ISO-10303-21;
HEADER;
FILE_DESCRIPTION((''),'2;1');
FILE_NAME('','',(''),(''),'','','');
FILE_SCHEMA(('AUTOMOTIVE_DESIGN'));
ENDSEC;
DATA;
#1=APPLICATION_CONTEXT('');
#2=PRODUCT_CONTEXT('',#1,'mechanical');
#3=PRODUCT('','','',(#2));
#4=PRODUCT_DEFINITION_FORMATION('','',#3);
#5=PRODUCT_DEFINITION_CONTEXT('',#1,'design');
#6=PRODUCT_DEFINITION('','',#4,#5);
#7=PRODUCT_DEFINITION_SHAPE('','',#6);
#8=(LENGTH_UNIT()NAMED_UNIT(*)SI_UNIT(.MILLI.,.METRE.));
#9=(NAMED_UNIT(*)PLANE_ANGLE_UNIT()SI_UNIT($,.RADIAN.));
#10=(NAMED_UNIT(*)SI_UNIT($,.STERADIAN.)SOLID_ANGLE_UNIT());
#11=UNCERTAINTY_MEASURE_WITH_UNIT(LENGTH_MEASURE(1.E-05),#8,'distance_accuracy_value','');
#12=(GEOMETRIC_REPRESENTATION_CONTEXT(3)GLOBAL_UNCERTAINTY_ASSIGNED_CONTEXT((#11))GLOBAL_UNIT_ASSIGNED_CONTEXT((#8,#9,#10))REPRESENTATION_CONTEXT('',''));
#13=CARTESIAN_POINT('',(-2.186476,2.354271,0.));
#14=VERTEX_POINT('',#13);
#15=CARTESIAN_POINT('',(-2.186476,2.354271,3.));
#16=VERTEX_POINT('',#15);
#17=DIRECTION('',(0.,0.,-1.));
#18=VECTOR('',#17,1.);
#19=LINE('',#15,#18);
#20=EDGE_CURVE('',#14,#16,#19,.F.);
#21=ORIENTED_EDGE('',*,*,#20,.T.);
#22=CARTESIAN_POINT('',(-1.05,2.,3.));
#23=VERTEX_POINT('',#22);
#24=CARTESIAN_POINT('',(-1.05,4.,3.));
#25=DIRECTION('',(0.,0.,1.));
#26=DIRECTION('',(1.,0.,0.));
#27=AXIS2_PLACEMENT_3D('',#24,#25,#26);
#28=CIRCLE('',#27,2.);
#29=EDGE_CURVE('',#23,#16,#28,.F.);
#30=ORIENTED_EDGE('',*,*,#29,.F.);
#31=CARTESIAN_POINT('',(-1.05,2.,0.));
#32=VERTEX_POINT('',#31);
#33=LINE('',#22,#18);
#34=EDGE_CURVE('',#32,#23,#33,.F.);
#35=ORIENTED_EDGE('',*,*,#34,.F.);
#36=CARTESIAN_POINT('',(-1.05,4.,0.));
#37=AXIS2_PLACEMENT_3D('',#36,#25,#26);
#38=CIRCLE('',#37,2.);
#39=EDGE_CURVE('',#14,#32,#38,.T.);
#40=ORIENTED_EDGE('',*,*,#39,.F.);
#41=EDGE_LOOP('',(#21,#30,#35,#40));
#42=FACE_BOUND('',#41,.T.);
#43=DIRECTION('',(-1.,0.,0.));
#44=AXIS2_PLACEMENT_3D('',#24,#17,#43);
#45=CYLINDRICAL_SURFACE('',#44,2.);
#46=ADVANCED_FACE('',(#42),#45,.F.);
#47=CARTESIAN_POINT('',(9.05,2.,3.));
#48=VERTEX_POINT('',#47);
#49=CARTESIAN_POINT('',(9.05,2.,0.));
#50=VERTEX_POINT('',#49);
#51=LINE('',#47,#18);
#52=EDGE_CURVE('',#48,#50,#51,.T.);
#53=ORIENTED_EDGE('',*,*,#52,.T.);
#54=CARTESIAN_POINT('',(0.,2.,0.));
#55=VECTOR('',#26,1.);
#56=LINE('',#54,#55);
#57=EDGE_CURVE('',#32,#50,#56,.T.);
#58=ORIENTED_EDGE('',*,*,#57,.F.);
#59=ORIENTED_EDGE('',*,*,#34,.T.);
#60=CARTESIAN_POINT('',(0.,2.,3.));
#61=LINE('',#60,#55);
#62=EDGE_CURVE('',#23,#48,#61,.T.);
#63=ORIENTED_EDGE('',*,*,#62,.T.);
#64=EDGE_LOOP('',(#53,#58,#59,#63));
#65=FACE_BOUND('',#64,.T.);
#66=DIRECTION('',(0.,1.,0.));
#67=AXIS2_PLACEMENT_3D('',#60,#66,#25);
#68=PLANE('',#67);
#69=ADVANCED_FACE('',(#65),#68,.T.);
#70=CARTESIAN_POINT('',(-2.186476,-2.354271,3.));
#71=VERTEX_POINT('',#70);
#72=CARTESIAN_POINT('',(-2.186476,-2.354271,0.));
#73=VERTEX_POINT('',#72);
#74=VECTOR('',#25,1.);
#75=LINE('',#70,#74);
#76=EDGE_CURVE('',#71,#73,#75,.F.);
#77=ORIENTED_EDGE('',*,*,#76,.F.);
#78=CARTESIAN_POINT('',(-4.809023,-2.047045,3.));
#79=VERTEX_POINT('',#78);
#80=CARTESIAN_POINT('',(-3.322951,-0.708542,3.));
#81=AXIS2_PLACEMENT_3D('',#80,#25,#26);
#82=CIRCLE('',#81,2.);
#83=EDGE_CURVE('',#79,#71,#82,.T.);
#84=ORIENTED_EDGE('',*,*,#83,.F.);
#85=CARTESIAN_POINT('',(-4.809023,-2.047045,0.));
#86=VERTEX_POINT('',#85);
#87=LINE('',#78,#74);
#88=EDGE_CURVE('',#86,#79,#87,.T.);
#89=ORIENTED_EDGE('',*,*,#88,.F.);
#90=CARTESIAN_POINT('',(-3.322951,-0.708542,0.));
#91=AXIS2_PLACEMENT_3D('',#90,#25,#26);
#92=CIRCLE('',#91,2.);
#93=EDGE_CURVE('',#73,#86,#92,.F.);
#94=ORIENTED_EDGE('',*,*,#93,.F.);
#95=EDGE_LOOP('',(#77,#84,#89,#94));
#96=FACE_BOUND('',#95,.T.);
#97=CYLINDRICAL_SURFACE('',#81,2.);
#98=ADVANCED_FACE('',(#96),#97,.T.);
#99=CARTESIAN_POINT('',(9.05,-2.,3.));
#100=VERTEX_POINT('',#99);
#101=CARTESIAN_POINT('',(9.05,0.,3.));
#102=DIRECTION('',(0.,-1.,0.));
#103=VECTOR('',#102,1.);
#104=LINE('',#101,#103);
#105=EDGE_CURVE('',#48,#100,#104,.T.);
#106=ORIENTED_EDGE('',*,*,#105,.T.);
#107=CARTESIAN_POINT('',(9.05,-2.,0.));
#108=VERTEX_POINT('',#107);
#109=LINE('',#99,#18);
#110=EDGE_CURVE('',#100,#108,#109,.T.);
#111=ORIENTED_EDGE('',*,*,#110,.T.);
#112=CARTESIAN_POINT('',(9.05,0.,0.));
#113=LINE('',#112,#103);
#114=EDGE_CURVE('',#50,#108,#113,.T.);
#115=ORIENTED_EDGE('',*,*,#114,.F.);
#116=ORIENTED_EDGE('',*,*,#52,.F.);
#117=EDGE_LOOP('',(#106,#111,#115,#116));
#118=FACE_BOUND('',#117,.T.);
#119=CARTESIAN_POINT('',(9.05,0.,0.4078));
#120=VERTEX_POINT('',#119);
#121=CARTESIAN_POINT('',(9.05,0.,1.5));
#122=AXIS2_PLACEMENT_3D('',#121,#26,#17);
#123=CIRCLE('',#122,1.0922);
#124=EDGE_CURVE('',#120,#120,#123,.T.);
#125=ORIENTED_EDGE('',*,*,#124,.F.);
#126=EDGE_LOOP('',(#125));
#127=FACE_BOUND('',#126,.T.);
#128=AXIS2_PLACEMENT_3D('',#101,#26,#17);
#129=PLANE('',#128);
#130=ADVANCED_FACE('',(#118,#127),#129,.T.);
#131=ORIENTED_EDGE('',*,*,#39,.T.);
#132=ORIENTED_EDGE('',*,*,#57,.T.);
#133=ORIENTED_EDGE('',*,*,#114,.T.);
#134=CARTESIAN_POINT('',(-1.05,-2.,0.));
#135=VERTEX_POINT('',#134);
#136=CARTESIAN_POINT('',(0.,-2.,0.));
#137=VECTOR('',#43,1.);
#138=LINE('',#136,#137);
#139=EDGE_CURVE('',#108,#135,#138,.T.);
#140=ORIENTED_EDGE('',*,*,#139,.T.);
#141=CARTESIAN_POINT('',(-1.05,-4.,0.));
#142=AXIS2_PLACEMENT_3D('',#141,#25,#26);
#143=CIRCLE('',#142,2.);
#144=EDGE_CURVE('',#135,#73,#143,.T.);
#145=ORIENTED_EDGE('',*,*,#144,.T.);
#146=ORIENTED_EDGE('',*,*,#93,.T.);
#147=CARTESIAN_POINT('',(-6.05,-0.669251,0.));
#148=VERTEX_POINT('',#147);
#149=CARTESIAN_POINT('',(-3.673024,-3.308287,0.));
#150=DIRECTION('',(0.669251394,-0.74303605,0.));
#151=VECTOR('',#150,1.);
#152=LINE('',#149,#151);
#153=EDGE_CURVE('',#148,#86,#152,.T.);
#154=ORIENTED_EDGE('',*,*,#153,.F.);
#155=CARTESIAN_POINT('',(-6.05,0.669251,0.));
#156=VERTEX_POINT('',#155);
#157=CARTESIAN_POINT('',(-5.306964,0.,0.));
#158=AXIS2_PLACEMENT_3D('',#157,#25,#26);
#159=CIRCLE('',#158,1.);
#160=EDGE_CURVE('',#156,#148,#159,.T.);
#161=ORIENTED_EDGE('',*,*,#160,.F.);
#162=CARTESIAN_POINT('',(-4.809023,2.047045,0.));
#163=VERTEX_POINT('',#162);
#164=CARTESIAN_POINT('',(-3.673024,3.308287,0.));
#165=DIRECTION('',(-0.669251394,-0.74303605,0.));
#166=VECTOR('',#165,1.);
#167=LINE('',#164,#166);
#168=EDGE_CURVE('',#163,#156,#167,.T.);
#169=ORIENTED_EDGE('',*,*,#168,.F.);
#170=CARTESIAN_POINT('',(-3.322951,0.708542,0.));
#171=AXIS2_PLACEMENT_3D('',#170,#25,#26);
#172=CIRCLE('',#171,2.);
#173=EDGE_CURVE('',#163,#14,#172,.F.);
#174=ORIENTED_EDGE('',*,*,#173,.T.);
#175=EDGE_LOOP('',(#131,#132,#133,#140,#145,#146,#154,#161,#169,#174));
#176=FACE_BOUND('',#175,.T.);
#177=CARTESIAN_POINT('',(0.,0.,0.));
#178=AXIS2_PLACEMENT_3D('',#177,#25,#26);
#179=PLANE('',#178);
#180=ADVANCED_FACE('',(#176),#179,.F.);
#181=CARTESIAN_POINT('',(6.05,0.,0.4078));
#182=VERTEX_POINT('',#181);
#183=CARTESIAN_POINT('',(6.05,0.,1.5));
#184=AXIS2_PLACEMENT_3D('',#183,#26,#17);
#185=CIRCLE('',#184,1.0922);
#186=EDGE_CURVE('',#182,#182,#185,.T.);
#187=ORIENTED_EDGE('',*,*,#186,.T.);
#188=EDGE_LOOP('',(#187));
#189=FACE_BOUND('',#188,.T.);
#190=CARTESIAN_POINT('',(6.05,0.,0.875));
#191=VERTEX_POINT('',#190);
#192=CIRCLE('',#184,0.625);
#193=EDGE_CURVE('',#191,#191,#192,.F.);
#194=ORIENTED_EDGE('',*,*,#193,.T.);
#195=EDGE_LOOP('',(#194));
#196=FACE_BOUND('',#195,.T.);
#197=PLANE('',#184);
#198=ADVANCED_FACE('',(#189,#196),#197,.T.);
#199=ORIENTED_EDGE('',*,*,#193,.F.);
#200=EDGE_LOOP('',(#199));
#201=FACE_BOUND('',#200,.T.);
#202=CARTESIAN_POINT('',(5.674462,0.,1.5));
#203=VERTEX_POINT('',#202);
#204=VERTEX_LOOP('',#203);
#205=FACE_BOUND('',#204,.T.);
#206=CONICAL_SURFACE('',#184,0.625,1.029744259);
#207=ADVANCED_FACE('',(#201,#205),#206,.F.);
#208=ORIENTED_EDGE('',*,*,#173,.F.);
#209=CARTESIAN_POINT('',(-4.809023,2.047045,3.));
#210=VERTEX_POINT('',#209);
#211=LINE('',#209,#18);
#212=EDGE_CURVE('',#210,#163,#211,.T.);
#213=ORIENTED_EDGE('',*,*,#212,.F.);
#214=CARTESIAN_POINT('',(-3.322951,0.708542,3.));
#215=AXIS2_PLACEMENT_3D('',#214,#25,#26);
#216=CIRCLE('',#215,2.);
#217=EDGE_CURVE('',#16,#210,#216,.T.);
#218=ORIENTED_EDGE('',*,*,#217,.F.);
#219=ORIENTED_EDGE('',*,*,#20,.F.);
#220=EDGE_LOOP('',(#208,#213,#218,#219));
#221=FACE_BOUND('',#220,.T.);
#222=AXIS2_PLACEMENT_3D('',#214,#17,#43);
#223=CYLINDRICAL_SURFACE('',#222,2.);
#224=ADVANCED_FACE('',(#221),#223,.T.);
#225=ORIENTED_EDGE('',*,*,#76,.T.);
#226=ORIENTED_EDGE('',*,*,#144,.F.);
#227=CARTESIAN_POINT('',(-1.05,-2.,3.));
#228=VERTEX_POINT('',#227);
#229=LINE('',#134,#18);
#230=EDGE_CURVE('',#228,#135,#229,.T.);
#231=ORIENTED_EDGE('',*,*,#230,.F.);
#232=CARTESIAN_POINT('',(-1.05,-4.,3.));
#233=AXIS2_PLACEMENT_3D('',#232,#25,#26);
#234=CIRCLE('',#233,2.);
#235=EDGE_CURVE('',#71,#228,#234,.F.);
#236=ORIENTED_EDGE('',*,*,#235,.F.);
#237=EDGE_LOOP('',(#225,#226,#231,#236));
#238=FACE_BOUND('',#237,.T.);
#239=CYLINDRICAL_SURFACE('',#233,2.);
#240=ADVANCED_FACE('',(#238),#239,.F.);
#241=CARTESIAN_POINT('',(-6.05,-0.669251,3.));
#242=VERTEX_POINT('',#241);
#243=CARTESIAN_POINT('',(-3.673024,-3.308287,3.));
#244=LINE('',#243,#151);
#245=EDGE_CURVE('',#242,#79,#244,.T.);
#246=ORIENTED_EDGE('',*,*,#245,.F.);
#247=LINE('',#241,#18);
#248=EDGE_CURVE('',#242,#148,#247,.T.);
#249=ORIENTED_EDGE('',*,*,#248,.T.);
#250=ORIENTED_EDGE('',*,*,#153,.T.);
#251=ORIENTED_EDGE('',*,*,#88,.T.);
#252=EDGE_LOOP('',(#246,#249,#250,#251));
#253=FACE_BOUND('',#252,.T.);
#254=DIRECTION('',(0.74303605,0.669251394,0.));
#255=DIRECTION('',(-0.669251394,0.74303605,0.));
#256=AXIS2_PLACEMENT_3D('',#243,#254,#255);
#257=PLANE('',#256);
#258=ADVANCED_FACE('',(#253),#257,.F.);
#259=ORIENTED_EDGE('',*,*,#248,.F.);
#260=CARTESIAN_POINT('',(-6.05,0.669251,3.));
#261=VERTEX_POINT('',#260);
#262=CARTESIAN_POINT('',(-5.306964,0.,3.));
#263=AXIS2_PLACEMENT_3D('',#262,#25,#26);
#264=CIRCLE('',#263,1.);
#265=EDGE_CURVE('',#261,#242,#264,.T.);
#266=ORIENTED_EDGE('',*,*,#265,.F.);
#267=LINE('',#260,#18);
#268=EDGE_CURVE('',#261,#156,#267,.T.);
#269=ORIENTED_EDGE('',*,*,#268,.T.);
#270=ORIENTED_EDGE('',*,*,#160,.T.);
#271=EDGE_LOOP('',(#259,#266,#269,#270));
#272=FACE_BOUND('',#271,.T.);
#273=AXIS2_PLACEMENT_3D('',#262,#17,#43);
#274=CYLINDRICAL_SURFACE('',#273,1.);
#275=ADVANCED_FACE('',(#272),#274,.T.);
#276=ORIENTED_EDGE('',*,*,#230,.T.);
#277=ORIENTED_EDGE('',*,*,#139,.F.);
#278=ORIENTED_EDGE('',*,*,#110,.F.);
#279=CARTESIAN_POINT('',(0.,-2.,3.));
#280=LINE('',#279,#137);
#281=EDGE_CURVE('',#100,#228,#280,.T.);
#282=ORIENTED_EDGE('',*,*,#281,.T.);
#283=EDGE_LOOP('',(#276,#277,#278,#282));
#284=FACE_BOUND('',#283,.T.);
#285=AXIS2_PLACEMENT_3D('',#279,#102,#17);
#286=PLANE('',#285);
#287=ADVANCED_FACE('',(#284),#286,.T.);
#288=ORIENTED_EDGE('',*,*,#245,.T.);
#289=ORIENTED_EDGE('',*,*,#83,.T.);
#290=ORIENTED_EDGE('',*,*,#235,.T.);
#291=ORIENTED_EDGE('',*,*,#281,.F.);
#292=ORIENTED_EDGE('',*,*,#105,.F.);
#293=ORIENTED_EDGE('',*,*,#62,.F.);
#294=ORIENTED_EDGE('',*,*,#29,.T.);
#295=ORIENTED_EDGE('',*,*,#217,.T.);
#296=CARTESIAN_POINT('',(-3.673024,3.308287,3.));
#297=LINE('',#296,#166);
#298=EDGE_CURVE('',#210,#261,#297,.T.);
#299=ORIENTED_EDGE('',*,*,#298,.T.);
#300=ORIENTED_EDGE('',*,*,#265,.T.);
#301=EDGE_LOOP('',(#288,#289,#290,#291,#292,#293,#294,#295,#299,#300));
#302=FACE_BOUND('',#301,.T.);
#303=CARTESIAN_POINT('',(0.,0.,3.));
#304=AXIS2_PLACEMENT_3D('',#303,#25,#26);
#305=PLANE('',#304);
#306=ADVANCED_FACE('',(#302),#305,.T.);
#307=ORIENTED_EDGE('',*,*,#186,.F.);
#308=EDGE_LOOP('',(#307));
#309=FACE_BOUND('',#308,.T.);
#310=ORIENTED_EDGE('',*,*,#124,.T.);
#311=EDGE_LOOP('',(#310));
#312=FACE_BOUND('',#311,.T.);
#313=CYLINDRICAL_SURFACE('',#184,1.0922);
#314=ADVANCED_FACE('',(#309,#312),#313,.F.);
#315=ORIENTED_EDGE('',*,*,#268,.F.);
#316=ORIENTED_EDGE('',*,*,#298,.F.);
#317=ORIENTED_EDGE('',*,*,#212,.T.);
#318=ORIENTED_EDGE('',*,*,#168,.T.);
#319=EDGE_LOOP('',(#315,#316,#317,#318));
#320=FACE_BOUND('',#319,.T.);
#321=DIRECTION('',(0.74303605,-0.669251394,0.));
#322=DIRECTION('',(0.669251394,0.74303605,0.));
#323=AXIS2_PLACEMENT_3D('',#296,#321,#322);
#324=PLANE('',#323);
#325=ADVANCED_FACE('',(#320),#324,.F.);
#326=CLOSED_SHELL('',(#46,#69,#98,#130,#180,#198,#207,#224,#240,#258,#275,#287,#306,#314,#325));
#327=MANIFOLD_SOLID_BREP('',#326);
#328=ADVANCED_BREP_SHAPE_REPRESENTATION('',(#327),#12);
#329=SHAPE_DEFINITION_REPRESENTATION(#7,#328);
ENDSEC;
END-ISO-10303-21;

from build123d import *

# Parameters (mm, degrees)
BOSS_EXTRUDE1_DEPTH     = 3
FILLET2_R               = 2
FILLET3_R               = 2
M1_6_TAPPED_HOLE1_D     = 1.25
M1_6_TAPPED_HOLE1_DEPTH = 3
M1_6_TAPPED_HOLE1_TIP   = 0.375537887
SKETCH5_R               = 1.0922
CUT_EXTRUDE1_DEPTH      = 3


with BuildPart() as part:
    # Sketch1 → Boss-Extrude1 (new body)
    with BuildSketch(Plane.XY):
        with BuildLine():
            Line((-3.05, 2), (-3.05, 4))
            Line((-3.05, 4), (-6.05, 0.669251394))
            ThreePointArc((-6.05, 0.669251394), (-6.30696395, 0), (-6.05, -0.669251394))
            Line((-6.05, -0.669251394), (-3.05, -4))
            Line((-3.05, -4), (-3.05, -2))
            Line((-3.05, -2), (3.05, -2))
            Line((3.05, -2), (9.05, -2))
            Line((9.05, -2), (9.05, 2))
            Line((9.05, 2), (3.05, 2))
            Line((3.05, 2), (-3.05, 2))
        make_face()
    extrude(amount=BOSS_EXTRUDE1_DEPTH)

    # Fillet2
    fillet2_edges = [part.edges().sort_by_distance(p)[0] for p in [
        (-3.05, -2, 1.5),
        (-3.05, 2, 1.5),
    ]]
    fillet(fillet2_edges, radius=FILLET2_R - 0.0001)  # a hair under: the kernel refuses the full size

    # Fillet3
    fillet3_edges = [part.edges().sort_by_distance(p)[0] for p in [
        (-3.05, 4, 1.5),
        (-3.05, -4, 1.5),
    ]]
    fillet(fillet3_edges, radius=FILLET3_R)

    # M1.6 Tapped Hole1
    with Locations(Plane(origin=(9.05, 0, 0), x_dir=(0, 0, -1), z_dir=(1, 0, 0))):
        with Locations((-1.5, 0)):
            Hole(M1_6_TAPPED_HOLE1_D / 2, depth=M1_6_TAPPED_HOLE1_DEPTH)
            with Locations((0, 0, -(M1_6_TAPPED_HOLE1_DEPTH + M1_6_TAPPED_HOLE1_TIP / 2))):  # 118° drill point
                Cone(0, M1_6_TAPPED_HOLE1_D / 2, M1_6_TAPPED_HOLE1_TIP, mode=Mode.SUBTRACT)

    # Sketch5 → Cut-Extrude1 (cut)
    with BuildSketch(Plane(origin=(9.05, 0, 0), x_dir=(0, 0, -1), z_dir=(1, 0, 0))):
        with Locations((-1.5, 0)):
            Circle(SKETCH5_R)
    extrude(amount=-CUT_EXTRUDE1_DEPTH, mode=Mode.SUBTRACT)


solid = part.part
